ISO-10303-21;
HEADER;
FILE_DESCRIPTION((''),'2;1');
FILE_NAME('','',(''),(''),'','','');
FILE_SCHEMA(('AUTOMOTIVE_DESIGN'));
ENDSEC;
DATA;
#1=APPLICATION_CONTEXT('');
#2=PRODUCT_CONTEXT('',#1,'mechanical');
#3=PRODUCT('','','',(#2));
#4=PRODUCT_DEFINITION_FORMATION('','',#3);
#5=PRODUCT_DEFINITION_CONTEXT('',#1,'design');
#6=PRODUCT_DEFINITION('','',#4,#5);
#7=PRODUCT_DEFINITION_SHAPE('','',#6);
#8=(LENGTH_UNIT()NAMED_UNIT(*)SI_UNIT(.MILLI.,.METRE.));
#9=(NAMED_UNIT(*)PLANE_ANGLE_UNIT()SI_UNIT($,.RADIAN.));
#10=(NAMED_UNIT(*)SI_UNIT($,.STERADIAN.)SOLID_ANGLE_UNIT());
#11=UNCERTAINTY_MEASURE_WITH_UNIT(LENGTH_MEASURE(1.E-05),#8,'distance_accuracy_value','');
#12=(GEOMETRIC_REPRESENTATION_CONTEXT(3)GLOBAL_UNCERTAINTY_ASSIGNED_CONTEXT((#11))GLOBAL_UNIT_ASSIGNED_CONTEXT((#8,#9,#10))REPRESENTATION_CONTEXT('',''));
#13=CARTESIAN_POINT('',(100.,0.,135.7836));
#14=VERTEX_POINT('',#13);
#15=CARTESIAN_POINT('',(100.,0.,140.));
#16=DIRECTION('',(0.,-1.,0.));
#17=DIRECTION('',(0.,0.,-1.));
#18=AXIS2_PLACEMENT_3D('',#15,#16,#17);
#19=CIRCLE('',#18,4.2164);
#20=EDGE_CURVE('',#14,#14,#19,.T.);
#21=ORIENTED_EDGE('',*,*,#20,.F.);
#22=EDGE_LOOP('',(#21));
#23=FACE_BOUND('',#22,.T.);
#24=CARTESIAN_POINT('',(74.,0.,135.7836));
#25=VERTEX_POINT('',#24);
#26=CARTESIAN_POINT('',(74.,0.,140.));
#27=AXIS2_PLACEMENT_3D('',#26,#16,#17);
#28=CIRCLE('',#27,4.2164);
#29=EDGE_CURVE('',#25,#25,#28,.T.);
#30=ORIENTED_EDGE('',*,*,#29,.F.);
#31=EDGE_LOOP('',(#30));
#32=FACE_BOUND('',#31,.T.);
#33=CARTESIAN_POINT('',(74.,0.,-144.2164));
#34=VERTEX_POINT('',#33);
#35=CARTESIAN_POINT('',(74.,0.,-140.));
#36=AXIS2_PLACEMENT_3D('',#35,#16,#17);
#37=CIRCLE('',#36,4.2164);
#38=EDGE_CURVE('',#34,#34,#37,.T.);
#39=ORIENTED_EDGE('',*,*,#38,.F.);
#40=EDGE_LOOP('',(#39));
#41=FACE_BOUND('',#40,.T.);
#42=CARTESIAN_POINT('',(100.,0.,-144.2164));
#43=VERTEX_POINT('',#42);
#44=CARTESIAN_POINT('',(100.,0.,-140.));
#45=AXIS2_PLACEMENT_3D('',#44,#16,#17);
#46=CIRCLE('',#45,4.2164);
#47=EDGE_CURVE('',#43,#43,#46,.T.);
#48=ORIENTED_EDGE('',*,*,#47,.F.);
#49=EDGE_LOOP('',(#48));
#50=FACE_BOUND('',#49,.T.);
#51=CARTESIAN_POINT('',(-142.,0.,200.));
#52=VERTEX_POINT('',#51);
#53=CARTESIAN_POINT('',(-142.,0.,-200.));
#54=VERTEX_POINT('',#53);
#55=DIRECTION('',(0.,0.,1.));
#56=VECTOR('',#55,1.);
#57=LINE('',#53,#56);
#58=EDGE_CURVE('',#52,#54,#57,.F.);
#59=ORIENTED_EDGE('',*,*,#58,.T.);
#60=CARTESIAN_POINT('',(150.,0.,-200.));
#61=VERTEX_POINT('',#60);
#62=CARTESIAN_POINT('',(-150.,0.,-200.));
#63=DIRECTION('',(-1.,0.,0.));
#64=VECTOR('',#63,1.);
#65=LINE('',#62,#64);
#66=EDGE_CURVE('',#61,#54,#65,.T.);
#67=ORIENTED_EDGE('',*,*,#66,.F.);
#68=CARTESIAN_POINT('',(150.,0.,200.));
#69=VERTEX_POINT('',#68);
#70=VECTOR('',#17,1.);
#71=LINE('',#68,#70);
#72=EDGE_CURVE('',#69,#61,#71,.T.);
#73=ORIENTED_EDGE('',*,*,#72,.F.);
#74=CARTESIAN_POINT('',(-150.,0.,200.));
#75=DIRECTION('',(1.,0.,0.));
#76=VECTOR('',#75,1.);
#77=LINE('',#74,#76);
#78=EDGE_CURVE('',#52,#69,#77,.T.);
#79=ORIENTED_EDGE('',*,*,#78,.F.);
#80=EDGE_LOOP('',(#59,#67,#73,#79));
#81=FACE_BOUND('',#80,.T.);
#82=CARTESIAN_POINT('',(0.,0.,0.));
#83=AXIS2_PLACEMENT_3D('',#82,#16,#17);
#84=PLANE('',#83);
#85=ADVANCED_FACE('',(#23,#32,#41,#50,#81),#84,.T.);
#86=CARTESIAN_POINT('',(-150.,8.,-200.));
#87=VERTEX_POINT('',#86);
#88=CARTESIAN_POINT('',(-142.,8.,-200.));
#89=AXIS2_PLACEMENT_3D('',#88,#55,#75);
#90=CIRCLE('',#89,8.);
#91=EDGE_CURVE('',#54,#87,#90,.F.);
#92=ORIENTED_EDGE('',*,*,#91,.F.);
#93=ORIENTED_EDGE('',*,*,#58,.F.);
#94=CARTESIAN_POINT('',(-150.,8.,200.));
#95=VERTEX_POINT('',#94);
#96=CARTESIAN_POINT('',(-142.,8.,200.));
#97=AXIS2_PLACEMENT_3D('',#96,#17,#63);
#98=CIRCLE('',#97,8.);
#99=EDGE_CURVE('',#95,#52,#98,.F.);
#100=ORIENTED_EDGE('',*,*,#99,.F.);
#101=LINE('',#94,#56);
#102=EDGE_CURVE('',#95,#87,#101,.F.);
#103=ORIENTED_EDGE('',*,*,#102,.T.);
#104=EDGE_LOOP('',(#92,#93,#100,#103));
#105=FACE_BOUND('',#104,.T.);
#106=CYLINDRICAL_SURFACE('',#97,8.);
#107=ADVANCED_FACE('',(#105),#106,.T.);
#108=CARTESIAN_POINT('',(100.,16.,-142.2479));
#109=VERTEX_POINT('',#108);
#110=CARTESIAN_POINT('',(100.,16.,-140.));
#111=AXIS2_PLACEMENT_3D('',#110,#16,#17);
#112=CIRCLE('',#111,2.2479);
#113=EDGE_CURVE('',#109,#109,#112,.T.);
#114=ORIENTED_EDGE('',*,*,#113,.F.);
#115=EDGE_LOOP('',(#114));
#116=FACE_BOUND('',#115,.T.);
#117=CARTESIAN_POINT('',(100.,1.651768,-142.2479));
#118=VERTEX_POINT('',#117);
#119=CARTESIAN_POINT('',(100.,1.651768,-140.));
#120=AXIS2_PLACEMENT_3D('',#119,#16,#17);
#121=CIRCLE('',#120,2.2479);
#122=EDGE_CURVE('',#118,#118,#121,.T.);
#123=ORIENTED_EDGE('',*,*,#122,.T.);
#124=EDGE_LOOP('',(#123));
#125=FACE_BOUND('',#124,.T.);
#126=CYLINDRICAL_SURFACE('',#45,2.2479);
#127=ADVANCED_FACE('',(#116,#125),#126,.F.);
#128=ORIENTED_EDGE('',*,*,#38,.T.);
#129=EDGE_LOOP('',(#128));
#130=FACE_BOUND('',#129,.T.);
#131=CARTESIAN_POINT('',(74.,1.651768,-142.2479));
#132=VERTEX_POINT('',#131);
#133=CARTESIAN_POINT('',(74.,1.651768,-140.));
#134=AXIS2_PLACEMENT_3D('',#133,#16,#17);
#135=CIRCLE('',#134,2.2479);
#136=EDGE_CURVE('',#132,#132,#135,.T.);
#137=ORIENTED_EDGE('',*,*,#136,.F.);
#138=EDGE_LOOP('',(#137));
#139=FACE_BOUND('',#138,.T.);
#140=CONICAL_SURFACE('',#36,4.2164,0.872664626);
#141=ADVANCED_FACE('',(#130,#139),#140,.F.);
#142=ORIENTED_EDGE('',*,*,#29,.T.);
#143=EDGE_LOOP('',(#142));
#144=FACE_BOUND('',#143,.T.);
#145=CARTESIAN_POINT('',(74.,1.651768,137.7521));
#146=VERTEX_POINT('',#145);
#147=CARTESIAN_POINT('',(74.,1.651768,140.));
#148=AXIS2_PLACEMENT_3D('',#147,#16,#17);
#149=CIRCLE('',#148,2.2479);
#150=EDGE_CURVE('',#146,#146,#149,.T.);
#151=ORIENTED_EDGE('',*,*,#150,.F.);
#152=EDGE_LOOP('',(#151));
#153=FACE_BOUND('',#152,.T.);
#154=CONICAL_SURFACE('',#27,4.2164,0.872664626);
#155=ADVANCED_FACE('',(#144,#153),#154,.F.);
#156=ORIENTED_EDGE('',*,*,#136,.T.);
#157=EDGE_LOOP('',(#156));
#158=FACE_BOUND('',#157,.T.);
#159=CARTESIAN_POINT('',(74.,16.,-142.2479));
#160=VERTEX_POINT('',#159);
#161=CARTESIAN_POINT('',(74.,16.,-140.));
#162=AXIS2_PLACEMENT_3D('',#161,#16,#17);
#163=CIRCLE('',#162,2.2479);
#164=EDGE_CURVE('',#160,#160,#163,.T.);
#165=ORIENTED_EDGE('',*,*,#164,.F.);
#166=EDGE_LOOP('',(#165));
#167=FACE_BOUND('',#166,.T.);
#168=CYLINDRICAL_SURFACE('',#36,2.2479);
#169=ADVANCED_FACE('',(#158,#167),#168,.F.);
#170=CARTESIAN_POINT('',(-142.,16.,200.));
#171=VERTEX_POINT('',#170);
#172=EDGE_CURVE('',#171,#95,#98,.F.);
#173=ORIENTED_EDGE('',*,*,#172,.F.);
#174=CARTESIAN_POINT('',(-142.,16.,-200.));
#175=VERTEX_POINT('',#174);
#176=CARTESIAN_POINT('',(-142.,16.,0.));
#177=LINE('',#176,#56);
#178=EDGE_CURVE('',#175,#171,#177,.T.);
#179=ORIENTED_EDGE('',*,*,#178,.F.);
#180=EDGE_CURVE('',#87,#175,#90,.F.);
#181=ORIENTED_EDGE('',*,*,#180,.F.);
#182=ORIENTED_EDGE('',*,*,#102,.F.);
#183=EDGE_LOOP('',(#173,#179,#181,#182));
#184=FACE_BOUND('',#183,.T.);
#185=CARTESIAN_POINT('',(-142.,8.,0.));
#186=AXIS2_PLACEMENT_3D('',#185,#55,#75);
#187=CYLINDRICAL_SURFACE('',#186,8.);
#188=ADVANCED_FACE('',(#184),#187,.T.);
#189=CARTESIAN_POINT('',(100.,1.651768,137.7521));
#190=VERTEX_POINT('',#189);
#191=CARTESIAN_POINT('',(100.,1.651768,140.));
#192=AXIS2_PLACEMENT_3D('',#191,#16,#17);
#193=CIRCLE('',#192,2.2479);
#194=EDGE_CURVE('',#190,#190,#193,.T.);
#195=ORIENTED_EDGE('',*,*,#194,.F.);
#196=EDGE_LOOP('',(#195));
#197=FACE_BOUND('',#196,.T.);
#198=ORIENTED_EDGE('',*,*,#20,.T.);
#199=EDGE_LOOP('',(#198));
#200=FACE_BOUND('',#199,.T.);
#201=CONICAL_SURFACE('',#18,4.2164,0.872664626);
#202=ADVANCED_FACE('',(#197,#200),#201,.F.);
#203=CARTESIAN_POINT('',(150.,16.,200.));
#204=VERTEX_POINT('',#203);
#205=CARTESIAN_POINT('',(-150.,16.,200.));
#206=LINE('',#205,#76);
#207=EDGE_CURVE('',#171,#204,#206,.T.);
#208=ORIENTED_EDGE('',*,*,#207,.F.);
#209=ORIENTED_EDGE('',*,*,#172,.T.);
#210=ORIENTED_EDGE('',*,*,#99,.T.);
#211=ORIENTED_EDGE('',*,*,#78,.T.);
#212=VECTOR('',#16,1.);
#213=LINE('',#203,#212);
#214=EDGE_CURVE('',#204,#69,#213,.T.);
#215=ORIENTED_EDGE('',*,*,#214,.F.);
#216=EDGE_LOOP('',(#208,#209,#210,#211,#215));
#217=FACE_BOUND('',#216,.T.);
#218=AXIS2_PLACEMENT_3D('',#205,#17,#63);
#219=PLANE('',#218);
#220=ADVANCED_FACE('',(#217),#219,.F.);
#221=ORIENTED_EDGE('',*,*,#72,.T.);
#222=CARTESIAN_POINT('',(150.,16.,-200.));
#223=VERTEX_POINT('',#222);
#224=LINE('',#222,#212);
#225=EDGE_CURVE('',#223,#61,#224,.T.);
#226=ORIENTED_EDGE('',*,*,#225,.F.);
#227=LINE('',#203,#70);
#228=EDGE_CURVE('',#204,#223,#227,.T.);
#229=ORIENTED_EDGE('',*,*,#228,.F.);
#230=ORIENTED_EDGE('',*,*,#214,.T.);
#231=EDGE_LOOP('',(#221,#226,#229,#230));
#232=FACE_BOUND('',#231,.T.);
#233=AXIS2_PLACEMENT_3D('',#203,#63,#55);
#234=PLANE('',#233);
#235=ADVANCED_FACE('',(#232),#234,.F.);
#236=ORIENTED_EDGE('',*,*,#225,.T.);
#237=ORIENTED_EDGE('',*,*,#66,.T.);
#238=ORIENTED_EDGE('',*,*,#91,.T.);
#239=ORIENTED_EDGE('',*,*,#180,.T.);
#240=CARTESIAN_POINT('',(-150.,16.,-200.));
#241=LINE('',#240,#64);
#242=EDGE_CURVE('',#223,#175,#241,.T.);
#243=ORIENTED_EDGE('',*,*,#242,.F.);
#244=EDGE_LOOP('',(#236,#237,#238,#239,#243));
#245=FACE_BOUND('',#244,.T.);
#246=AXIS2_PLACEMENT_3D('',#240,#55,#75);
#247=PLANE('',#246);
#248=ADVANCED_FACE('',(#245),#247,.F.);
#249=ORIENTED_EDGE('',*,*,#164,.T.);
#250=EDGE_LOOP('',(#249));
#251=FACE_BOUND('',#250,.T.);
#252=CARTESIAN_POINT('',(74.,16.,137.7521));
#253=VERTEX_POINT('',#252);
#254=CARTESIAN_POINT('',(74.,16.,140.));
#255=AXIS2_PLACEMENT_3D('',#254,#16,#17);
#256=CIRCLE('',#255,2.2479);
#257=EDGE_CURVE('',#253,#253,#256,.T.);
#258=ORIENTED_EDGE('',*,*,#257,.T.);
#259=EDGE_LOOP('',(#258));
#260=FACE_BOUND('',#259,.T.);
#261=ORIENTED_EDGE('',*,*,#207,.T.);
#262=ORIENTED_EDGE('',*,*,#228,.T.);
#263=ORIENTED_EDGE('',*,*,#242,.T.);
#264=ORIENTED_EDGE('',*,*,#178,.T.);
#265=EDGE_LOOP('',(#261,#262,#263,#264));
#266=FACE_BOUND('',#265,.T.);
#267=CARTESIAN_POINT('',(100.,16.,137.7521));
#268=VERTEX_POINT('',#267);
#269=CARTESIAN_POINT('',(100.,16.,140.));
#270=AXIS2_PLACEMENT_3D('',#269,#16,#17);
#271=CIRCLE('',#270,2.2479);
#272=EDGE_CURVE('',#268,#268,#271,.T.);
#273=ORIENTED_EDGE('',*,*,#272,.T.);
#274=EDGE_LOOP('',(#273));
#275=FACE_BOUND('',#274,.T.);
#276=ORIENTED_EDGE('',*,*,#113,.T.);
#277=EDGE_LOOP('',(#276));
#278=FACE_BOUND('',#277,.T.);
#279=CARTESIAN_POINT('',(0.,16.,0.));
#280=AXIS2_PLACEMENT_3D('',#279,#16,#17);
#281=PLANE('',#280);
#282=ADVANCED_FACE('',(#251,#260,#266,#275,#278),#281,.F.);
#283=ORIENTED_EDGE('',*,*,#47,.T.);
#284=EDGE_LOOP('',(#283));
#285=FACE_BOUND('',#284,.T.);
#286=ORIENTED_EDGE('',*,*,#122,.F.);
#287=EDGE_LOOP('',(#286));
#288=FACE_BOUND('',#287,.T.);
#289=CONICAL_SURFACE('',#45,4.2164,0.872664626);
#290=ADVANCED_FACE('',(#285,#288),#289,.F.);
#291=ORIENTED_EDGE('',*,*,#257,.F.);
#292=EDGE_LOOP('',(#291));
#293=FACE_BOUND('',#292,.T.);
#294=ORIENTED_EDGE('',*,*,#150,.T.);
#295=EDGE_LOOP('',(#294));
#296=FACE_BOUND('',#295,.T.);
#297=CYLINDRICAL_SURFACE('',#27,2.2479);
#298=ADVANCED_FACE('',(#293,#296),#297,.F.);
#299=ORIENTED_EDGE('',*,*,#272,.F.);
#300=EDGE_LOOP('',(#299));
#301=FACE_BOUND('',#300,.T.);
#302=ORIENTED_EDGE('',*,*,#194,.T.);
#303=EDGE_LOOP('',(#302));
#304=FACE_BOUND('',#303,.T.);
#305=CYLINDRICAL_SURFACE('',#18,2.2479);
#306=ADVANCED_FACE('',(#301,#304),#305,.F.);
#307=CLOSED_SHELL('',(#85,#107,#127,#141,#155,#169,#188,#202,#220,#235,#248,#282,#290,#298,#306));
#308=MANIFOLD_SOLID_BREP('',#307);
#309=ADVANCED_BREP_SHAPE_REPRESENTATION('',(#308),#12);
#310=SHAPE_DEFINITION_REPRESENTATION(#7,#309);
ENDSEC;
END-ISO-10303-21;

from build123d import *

# Parameters (mm, degrees)
SKETCH1_W                                 = 300
SKETCH1_H                                 = 400
BOSS_EXTRUDE1_DEPTH                       = 16
CSK_FOR_8_FLAT_HEAD_MACHINE_SCREW_2_COUNT = 2
CSK_FOR_8_FLAT_HEAD_MACHINE_SCREW_2_PITCH = 26
FILLET1_R                                 = 8


with BuildPart() as part:
    # Sketch1 → Boss-Extrude1 (new body)
    with BuildSketch(Plane(origin=(0, 0, 0), x_dir=(1, 0, 0), z_dir=(0, 1, 0))):
        Rectangle(SKETCH1_W, SKETCH1_H)
    extrude(amount=BOSS_EXTRUDE1_DEPTH)

    # Sketch8 → CSK for #8 Flat Head Machine Screw (100)1 (revolve, cut)
    with BuildSketch(Plane(origin=(100, 0, 140), x_dir=(0, 0, -1), z_dir=(1, 0, 0))):
        Polygon((0, 0), (0, 26.350674586), (2.2479, 25), (2.2479, 1.651767624), (4.2164, 0), align=None)
    csk_for_8_flat_head_machine_screw_100 = revolve(axis=Axis((100, -6.35, 140), (0, 1, 0)), mode=Mode.SUBTRACT)

    # CSK for _8 Flat Head Machine Screw _ 2: CSK for #8 Flat Head Machine Screw (100)1 ×2
    with Locations(*[(-i * CSK_FOR_8_FLAT_HEAD_MACHINE_SCREW_2_PITCH, 0, 0) for i in range(1, CSK_FOR_8_FLAT_HEAD_MACHINE_SCREW_2_COUNT)]):
        add(csk_for_8_flat_head_machine_screw_100, mode=Mode.SUBTRACT)

    # Mirror1: CSK for #8 Flat Head Machine Screw (100)1 across plane
    add(csk_for_8_flat_head_machine_screw_100.mirror(Plane.XY), mode=Mode.SUBTRACT)

    # Mirror1 copy 1 sketch → Mirror1 copy 1 (revolve, cut)
    with BuildSketch(Plane(origin=(74, 0, -140), x_dir=(0, 0, 1), z_dir=(1, 0, 0))):
        Polygon((0, 0), (0, -26.350674586), (2.2479, -25), (2.2479, -1.651767624), (4.2164, 0), align=None)
    revolve(axis=Axis((74, -6.35, -140), (0, -1, 0)), mode=Mode.SUBTRACT)

    # Fillet1
    fillet1_edges = [part.edges().sort_by_distance(p)[0] for p in [
        (-150, 16, 0),
        (-150, 0, 0),
    ]]
    fillet(fillet1_edges, radius=FILLET1_R - 0.0001)  # a hair under: the kernel refuses the full size


solid = part.part
